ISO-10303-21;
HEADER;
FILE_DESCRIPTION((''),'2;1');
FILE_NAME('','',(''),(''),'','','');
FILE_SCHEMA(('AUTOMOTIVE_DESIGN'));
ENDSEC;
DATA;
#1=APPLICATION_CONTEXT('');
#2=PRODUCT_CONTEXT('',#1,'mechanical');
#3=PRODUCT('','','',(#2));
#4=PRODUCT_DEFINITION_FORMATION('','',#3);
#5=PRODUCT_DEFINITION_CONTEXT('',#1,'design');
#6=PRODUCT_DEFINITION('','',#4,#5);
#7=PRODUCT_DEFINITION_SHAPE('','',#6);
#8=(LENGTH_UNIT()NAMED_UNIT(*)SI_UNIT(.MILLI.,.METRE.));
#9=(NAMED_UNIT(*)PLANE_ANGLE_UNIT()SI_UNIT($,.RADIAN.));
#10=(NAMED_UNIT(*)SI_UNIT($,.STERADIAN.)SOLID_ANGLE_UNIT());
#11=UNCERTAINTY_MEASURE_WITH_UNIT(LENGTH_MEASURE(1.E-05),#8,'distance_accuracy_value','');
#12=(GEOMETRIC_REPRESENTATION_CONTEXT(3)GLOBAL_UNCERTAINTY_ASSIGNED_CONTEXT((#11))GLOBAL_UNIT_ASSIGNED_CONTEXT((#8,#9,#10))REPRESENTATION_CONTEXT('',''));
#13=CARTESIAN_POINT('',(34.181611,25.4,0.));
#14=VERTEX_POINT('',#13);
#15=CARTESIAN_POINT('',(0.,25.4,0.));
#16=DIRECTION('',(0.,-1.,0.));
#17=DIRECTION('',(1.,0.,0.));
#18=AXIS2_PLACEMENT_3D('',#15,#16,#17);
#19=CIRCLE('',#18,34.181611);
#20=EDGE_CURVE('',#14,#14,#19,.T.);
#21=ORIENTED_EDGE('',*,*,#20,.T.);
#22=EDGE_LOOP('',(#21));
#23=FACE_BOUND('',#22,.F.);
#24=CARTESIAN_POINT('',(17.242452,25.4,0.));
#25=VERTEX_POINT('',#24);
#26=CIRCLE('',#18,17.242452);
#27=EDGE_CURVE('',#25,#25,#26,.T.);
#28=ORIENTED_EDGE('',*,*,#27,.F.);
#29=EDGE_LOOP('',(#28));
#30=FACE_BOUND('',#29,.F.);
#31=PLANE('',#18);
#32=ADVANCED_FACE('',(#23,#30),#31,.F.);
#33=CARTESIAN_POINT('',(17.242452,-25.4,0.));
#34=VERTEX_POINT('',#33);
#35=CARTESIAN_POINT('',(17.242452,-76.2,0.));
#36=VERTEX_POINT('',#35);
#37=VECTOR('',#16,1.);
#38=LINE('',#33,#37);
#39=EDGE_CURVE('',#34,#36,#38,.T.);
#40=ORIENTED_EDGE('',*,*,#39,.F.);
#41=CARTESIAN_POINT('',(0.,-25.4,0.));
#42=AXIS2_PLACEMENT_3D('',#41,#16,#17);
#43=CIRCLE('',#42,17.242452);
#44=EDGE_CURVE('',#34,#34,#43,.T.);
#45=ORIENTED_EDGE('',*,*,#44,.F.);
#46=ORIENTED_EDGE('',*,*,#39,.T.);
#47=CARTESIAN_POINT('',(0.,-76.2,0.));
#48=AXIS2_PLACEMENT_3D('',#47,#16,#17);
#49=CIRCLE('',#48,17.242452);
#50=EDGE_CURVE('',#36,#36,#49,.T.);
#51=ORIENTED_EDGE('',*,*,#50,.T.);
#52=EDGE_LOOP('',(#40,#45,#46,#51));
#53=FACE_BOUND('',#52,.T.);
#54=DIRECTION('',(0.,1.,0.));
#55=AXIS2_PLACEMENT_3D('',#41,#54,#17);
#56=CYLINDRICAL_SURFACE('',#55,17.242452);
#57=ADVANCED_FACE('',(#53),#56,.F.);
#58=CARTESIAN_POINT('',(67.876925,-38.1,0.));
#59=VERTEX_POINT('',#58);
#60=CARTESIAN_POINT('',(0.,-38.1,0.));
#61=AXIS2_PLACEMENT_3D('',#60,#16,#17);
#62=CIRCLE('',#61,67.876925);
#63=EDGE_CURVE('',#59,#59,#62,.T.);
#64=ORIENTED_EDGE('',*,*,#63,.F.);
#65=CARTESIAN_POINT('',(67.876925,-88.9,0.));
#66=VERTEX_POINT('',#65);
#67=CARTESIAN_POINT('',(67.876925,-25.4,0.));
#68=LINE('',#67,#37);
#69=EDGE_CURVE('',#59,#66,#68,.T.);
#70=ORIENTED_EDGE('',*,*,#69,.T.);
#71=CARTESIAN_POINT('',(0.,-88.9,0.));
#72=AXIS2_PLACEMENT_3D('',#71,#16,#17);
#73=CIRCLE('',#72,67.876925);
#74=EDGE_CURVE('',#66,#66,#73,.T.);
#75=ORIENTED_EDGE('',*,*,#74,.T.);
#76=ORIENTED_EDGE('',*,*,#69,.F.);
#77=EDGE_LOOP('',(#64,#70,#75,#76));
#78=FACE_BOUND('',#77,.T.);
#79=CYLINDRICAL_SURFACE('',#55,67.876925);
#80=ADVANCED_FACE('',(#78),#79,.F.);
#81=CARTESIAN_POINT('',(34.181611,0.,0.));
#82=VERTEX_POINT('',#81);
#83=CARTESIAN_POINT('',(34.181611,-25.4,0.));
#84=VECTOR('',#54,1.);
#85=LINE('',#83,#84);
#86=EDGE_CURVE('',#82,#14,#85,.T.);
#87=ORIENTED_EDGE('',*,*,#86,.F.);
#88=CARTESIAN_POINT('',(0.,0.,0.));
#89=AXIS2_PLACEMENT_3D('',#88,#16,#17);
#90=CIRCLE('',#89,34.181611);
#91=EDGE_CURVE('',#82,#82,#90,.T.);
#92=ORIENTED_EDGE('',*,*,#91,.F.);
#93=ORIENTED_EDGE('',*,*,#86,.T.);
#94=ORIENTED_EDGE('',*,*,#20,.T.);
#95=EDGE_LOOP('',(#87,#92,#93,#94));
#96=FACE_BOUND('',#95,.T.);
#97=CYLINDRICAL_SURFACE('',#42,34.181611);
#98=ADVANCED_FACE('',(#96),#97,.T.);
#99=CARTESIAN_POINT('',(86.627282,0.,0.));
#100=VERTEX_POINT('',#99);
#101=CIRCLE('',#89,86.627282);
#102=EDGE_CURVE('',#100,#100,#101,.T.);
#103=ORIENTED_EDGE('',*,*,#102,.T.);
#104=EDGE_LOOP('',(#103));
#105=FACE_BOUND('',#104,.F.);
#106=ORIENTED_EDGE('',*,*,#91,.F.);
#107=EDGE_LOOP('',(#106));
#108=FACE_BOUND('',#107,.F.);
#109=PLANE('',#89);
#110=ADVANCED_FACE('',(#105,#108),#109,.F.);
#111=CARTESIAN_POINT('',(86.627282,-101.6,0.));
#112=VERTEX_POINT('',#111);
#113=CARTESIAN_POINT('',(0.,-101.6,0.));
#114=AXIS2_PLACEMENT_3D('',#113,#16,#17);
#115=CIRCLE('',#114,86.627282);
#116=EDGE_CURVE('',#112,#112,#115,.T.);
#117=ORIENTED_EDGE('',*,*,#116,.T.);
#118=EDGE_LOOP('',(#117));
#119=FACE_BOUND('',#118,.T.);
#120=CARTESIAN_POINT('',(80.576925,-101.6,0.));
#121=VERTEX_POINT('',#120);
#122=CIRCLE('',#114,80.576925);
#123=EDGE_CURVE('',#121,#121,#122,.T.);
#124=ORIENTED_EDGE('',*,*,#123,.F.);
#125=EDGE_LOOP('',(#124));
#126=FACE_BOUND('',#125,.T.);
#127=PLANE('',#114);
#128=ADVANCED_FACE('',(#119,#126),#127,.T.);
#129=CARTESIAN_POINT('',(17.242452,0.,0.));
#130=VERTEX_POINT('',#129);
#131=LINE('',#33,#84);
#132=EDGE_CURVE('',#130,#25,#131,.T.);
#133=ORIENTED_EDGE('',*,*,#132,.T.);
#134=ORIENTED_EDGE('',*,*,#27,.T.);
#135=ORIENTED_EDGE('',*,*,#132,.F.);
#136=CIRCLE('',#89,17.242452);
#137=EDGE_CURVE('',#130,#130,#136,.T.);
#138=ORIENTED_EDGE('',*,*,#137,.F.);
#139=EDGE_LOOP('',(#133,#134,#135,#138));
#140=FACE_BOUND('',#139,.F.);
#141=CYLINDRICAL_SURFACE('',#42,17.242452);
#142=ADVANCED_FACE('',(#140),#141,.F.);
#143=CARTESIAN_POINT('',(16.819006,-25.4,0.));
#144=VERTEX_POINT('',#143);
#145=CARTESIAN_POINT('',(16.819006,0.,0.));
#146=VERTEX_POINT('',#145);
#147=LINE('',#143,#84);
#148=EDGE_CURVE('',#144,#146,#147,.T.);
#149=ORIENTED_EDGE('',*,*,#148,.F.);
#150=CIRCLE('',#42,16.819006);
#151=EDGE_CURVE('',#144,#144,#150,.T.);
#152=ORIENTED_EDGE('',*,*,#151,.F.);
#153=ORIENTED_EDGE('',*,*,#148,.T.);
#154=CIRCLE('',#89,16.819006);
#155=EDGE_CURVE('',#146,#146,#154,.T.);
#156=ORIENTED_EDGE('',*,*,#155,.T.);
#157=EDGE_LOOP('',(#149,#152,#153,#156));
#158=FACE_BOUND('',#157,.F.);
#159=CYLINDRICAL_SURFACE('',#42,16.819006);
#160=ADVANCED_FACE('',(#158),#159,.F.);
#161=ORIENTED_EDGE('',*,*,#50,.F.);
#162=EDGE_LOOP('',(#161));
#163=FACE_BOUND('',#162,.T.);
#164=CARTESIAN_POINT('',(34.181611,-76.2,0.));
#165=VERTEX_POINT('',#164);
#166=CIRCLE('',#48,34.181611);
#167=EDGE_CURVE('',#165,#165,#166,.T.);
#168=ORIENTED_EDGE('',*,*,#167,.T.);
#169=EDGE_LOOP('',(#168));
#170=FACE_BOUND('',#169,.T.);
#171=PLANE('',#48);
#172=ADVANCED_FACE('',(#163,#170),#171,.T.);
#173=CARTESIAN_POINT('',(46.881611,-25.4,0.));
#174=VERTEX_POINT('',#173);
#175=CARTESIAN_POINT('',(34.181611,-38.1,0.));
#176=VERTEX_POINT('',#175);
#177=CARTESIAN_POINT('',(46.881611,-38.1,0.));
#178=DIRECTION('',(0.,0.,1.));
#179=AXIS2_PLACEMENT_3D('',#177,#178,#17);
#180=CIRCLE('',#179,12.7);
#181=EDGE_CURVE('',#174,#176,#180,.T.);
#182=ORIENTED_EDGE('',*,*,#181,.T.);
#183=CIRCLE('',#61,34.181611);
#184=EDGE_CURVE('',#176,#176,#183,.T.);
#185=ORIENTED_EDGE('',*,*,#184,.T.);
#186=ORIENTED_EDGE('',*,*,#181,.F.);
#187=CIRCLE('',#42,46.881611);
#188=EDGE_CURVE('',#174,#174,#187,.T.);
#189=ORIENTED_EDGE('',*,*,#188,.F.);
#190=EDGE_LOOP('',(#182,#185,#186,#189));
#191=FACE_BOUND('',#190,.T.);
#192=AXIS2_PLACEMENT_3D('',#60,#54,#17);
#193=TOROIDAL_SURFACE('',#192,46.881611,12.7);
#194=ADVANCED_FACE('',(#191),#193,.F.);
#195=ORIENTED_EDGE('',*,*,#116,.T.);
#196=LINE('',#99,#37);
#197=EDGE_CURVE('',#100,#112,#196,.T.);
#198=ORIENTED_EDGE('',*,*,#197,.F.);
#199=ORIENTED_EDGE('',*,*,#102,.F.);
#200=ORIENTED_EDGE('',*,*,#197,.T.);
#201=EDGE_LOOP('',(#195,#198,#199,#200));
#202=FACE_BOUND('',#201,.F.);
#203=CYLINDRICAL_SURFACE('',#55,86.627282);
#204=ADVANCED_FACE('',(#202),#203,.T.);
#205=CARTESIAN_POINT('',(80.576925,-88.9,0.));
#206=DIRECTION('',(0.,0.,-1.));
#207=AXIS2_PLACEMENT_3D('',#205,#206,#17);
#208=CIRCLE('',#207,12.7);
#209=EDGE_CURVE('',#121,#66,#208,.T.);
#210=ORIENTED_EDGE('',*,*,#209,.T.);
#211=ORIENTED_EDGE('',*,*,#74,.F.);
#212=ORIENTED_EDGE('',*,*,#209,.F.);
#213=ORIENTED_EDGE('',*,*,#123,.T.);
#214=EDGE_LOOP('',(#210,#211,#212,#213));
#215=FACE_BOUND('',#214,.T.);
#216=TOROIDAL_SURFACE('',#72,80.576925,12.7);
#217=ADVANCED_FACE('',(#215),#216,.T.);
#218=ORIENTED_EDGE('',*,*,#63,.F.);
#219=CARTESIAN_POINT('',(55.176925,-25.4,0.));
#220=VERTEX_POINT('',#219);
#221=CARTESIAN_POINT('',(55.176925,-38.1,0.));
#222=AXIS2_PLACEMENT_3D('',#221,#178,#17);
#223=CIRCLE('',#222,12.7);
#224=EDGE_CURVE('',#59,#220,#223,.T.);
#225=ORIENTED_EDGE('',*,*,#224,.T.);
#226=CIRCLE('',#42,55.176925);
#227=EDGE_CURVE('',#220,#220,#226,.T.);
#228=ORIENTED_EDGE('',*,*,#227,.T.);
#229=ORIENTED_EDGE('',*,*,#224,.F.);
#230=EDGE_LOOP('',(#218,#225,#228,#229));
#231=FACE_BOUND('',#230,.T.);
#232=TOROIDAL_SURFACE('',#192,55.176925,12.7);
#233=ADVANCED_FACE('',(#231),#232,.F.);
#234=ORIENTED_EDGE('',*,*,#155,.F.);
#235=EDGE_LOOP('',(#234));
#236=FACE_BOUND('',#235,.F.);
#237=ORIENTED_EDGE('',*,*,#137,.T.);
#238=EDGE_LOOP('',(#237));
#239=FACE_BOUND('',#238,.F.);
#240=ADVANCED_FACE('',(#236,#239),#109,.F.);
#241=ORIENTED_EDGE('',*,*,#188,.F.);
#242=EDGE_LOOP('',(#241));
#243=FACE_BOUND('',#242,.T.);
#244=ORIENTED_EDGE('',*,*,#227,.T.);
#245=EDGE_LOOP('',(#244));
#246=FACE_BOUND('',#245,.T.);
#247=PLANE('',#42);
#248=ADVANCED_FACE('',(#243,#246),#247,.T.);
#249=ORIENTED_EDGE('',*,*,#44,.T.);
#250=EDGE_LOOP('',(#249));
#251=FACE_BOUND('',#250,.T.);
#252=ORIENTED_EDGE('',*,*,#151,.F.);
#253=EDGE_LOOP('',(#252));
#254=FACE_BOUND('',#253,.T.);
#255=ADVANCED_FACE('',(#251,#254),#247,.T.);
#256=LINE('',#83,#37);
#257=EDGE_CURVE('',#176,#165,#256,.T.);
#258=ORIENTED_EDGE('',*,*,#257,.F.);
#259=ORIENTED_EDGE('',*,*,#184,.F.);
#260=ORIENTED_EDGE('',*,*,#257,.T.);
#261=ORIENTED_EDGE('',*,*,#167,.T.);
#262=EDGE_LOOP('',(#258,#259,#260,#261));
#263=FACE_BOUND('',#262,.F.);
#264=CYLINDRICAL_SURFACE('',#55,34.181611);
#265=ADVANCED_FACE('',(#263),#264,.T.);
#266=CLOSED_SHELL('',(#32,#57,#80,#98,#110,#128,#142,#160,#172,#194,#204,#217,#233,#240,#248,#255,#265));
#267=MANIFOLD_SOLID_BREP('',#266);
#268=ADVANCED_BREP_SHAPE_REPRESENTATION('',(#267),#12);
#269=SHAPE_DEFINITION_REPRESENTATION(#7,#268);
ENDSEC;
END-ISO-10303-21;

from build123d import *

# Parameters (mm, degrees)
F0_R          = 86.6272823849
F1_DEPTH      = 25.4
F2_R          = 86.6272823849
F2_R_2        = 67.8769245924
F3_DEPTH      = 76.2
F4_R          = 34.1816109176
F4_R_2        = 17.2424518984
F5_DEPTH      = 50.8
F5_DEPTH_BACK = 50.8
F6_R          = 16.8190059926
F7_DEPTH      = 50.8
F8_R          = 12.7
F9_R          = 12.7


with BuildPart() as f1:
    # F0 (on Front) → F1 (new body)
    with BuildSketch(Plane.XZ):
        Circle(F0_R)
    extrude(amount=F1_DEPTH)

    # F2 (on face) → F3 (join)
    with BuildSketch(Plane.XZ.offset(25.4)):
        Circle(F2_R)
        Circle(F2_R_2, mode=Mode.SUBTRACT)
    extrude(amount=F3_DEPTH)

    # F4 (on face) → F5 (join, two sides)
    with BuildSketch(Plane.XZ.offset(25.4)) as f5_sk:
        Circle(F4_R)
        Circle(F4_R_2, mode=Mode.SUBTRACT)
    extrude(amount=F5_DEPTH)
    extrude(f5_sk.sketch, amount=-F5_DEPTH_BACK)

    # F6 (on face) → F7 (cut)
    with BuildSketch(Plane.XZ.offset(25.4)):
        Circle(F6_R)
    extrude(amount=-F7_DEPTH, mode=Mode.SUBTRACT)

    # F8
    f8_edges = [f1.edges().sort_by_distance(p)[0] for p in [
        (-67.876925, -101.6, 0),
    ]]
    fillet(f8_edges, radius=F8_R)

    # F9
    f9_edges = [f1.edges().sort_by_distance(p)[0] for p in [
        (-67.876925, -25.4, 0),
        (-34.181611, -25.4, 0),
    ]]
    fillet(f9_edges, radius=F9_R)


solid = f1.part
